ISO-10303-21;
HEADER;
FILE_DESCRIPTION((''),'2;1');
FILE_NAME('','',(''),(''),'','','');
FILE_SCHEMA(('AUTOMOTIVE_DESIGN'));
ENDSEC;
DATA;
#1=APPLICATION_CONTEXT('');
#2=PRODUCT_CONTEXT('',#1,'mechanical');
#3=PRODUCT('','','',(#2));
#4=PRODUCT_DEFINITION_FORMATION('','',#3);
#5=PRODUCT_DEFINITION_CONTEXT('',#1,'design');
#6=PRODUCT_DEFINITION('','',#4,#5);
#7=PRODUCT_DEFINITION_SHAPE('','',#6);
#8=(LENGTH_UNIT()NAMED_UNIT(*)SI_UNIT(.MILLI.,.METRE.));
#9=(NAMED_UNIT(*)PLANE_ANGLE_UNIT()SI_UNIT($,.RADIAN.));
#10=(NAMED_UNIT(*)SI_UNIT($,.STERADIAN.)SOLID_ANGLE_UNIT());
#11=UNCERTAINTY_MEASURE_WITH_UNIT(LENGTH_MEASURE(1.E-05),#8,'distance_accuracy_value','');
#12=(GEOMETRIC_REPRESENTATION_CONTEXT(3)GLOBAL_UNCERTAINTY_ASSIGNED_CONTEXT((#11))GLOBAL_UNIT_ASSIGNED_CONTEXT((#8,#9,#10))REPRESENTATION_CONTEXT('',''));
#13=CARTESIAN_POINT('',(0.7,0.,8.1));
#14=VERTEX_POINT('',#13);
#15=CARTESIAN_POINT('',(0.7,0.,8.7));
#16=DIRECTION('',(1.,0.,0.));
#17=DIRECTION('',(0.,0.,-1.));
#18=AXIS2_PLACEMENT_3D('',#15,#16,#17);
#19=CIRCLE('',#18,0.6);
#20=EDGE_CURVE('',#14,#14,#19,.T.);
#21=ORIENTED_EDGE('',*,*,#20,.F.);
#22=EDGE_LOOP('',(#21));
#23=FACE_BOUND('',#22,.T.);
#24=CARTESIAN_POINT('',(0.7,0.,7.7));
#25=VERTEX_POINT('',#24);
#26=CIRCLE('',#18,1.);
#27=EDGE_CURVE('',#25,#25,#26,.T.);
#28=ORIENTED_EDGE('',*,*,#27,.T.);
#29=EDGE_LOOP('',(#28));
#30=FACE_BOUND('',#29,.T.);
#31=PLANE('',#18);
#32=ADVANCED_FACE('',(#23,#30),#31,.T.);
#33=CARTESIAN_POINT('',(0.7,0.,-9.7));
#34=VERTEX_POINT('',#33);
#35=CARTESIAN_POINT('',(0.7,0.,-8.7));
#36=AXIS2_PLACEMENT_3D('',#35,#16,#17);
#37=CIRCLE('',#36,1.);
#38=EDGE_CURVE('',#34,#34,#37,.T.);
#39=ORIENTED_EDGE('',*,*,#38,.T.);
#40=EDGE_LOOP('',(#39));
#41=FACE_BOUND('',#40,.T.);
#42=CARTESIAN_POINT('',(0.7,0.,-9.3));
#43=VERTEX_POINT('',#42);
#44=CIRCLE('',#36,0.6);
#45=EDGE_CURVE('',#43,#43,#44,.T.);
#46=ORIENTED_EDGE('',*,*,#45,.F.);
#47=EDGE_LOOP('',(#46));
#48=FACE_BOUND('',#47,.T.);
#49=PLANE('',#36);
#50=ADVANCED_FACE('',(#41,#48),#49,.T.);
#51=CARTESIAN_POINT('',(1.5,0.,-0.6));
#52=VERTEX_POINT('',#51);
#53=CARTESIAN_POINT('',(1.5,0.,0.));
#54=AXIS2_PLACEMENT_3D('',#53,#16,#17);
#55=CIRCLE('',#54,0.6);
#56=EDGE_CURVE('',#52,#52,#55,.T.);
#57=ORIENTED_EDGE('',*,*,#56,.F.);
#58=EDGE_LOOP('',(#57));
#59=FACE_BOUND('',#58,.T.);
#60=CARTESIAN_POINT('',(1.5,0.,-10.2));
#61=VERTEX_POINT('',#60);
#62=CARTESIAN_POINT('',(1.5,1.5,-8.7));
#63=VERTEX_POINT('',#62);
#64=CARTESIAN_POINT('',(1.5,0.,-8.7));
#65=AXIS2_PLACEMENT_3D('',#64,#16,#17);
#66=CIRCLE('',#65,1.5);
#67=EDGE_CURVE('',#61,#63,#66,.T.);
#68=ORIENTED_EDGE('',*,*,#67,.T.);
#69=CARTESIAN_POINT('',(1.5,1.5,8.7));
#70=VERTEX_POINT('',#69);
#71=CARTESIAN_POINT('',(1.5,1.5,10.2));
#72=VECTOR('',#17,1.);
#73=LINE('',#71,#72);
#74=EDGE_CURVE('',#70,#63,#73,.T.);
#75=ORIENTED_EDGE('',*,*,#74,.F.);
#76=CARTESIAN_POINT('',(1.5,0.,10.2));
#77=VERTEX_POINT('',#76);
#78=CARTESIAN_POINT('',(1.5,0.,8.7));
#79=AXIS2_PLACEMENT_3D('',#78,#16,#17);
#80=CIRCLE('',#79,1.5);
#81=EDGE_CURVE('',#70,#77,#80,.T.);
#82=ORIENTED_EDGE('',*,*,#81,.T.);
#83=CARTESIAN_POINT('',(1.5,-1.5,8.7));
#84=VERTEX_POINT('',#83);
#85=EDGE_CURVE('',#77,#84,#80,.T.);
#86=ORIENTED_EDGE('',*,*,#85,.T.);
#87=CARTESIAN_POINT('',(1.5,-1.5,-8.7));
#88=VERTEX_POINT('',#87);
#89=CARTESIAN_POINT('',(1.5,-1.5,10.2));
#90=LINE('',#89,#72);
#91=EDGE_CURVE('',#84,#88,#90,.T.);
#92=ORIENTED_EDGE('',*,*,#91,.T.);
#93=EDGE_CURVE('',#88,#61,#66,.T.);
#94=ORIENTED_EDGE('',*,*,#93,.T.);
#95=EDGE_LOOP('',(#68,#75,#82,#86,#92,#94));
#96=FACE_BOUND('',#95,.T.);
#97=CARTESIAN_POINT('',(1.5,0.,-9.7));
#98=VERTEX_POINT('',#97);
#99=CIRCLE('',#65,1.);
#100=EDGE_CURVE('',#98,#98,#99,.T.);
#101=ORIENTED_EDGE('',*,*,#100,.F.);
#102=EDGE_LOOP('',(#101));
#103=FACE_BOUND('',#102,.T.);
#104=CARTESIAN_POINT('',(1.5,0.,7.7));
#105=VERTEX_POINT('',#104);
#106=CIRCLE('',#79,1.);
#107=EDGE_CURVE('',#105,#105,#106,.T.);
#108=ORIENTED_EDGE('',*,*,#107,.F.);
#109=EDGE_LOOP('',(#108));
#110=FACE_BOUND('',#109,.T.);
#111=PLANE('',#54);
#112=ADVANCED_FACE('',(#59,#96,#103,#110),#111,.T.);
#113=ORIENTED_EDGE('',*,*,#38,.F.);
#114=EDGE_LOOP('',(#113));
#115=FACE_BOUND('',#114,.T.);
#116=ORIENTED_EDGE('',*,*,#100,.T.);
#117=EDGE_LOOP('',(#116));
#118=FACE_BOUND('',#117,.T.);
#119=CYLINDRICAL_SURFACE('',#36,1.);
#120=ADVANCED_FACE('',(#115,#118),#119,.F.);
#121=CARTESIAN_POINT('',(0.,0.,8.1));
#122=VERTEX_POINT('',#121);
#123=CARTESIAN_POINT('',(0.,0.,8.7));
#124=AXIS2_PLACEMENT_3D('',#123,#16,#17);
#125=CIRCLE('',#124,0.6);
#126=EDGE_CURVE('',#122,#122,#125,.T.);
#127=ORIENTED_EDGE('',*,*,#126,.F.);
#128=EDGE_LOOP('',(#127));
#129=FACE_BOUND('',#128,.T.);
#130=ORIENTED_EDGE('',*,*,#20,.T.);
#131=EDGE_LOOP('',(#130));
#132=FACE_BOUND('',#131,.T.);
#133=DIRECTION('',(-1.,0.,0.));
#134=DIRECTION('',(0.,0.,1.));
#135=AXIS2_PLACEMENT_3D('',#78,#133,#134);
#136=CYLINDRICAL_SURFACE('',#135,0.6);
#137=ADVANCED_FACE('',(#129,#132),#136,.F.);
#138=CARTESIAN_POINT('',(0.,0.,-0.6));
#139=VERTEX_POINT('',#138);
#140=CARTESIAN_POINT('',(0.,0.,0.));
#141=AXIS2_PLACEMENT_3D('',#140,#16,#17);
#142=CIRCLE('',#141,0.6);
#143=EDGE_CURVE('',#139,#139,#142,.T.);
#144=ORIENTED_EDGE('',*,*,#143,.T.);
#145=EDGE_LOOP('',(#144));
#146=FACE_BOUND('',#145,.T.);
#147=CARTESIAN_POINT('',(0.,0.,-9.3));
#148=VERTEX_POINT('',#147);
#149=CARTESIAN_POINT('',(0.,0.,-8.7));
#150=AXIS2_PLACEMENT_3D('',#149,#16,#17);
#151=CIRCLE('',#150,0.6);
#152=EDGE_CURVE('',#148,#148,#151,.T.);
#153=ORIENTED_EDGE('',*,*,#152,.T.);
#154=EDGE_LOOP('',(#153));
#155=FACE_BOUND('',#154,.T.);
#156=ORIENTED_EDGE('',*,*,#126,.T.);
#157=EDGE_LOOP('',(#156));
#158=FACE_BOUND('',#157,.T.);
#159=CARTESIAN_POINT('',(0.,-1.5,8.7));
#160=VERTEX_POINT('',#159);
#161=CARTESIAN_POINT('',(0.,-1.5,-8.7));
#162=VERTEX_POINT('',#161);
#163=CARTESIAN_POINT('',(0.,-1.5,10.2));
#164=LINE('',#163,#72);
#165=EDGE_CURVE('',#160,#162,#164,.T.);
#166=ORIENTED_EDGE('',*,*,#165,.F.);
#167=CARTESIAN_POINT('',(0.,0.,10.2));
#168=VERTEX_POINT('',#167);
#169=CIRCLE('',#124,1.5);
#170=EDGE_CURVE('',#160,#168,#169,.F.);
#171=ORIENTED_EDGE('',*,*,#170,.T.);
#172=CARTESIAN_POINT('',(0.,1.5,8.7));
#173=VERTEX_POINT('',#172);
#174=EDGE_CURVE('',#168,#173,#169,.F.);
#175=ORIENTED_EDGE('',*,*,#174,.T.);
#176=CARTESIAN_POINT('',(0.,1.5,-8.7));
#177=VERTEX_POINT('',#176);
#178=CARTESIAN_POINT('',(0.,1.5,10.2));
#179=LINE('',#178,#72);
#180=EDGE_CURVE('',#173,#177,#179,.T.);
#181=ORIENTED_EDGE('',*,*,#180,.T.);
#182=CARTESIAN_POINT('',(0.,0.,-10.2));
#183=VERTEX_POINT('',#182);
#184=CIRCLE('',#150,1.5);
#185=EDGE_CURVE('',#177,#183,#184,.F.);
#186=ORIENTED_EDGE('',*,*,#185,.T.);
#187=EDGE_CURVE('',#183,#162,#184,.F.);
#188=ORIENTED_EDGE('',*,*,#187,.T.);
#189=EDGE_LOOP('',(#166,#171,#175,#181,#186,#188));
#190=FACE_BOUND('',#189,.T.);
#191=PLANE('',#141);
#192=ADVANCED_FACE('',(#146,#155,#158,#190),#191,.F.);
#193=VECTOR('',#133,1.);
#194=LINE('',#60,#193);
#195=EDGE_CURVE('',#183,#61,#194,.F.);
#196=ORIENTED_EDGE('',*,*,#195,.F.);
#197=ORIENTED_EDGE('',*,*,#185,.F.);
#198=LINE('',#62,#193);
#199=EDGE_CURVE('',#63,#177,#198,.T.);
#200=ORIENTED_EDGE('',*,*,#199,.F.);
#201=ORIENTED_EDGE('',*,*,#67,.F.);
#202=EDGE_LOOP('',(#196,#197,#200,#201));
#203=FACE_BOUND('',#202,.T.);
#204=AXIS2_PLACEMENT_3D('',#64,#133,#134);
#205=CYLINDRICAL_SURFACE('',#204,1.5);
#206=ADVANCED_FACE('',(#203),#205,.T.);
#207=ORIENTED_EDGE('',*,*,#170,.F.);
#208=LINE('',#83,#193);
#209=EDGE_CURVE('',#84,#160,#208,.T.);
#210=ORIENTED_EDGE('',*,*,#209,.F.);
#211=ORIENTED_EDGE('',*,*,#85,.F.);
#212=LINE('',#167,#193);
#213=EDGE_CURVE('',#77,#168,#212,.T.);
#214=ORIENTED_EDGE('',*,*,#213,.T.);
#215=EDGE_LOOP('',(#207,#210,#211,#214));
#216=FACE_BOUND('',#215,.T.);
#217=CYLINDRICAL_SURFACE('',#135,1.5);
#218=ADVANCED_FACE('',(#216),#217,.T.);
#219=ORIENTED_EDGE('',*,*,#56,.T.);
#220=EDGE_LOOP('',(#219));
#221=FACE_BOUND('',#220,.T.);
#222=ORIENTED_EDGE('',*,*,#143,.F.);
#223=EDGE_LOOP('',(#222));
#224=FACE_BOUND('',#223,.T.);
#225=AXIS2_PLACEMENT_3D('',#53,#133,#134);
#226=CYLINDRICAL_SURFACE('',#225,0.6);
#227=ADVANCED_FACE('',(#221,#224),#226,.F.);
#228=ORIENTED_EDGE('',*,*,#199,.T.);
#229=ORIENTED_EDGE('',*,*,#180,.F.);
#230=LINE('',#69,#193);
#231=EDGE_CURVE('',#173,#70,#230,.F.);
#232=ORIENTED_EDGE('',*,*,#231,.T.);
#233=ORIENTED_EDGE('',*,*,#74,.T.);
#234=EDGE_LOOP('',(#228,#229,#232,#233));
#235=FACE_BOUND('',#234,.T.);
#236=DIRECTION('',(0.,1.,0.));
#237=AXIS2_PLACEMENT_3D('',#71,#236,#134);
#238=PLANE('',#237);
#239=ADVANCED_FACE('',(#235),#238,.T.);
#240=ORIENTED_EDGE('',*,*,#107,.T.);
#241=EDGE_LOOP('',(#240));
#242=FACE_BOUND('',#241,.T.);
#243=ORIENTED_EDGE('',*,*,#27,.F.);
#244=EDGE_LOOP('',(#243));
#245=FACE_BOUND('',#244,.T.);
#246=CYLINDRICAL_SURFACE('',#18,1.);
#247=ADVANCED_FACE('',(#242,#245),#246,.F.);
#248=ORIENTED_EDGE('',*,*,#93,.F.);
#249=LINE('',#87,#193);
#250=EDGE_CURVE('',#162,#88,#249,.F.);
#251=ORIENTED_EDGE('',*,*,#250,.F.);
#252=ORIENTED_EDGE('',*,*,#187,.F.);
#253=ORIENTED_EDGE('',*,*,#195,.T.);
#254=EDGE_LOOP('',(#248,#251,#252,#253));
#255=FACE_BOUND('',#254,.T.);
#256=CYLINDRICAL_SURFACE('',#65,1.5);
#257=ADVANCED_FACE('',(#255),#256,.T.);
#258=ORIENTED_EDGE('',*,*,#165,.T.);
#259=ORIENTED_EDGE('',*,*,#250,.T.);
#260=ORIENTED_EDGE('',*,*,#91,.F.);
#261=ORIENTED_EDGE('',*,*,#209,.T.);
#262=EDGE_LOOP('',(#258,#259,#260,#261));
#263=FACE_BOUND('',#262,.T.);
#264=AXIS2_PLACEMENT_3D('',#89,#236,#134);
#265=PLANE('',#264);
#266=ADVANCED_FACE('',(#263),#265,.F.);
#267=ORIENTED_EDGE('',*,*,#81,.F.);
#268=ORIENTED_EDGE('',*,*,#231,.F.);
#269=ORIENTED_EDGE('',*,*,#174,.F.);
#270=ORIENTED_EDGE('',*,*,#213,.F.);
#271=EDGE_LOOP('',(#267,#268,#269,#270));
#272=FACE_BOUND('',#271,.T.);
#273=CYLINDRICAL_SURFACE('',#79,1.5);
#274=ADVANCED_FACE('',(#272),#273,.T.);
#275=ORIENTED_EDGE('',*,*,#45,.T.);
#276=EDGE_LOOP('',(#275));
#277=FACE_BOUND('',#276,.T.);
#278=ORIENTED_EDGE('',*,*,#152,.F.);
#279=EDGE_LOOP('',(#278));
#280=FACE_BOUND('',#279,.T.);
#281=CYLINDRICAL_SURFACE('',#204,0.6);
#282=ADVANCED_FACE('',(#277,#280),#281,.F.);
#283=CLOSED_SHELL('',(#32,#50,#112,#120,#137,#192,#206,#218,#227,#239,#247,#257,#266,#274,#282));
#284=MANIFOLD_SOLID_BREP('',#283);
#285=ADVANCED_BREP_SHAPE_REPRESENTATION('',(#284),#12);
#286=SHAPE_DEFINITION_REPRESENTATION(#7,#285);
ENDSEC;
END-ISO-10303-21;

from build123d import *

# Parameters (mm, degrees)
SKETCH_1_W          = 20.4
SKETCH_1_H          = 3
SKETCH_1_R          = 0.6
EXTRUDE_1_DEPTH     = 1.5
FILLET_1_R          = 1.5
CUT_EXTRUDE_START   = 1.5
SKETCH_1_3_R        = 1
CUT_EXTRUDE_1_DEPTH = 0.8


with BuildPart() as part:
    # 草图1 → 凸台-拉伸1 (new body)
    with BuildSketch(Plane(origin=(0, 0, 0), x_dir=(0, 0, -1), z_dir=(1, 0, 0))):
        Rectangle(SKETCH_1_W, SKETCH_1_H)
        Circle(SKETCH_1_R, mode=Mode.SUBTRACT)
        with Locations((-8.7, 0)):
            Circle(SKETCH_1_R, mode=Mode.SUBTRACT)
        with Locations((8.7, 0)):
            Circle(SKETCH_1_R, mode=Mode.SUBTRACT)
    extrude(amount=EXTRUDE_1_DEPTH)

    # 圆角1
    fillet_1_edges = [part.edges().sort_by_distance(p)[0] for p in [
        (0.75, -1.5, -10.2),
        (0.75, 1.5, -10.2),
        (0.75, -1.5, 10.2),
        (0.75, 1.5, 10.2),
    ]]
    fillet(fillet_1_edges, radius=FILLET_1_R - 0.0001)  # a hair under: the kernel refuses the full size

    # 草图1<3> → 切除-拉伸1 (cut)
    with BuildSketch(Plane(origin=(0, 0, 0), x_dir=(0, 0, -1), z_dir=(1, 0, 0)).offset(CUT_EXTRUDE_START)):
        with Locations((-8.7, 0)):
            Circle(SKETCH_1_3_R)
        with Locations((8.7, 0)):
            Circle(SKETCH_1_3_R)
    extrude(amount=-CUT_EXTRUDE_1_DEPTH, mode=Mode.SUBTRACT)


solid = part.part
